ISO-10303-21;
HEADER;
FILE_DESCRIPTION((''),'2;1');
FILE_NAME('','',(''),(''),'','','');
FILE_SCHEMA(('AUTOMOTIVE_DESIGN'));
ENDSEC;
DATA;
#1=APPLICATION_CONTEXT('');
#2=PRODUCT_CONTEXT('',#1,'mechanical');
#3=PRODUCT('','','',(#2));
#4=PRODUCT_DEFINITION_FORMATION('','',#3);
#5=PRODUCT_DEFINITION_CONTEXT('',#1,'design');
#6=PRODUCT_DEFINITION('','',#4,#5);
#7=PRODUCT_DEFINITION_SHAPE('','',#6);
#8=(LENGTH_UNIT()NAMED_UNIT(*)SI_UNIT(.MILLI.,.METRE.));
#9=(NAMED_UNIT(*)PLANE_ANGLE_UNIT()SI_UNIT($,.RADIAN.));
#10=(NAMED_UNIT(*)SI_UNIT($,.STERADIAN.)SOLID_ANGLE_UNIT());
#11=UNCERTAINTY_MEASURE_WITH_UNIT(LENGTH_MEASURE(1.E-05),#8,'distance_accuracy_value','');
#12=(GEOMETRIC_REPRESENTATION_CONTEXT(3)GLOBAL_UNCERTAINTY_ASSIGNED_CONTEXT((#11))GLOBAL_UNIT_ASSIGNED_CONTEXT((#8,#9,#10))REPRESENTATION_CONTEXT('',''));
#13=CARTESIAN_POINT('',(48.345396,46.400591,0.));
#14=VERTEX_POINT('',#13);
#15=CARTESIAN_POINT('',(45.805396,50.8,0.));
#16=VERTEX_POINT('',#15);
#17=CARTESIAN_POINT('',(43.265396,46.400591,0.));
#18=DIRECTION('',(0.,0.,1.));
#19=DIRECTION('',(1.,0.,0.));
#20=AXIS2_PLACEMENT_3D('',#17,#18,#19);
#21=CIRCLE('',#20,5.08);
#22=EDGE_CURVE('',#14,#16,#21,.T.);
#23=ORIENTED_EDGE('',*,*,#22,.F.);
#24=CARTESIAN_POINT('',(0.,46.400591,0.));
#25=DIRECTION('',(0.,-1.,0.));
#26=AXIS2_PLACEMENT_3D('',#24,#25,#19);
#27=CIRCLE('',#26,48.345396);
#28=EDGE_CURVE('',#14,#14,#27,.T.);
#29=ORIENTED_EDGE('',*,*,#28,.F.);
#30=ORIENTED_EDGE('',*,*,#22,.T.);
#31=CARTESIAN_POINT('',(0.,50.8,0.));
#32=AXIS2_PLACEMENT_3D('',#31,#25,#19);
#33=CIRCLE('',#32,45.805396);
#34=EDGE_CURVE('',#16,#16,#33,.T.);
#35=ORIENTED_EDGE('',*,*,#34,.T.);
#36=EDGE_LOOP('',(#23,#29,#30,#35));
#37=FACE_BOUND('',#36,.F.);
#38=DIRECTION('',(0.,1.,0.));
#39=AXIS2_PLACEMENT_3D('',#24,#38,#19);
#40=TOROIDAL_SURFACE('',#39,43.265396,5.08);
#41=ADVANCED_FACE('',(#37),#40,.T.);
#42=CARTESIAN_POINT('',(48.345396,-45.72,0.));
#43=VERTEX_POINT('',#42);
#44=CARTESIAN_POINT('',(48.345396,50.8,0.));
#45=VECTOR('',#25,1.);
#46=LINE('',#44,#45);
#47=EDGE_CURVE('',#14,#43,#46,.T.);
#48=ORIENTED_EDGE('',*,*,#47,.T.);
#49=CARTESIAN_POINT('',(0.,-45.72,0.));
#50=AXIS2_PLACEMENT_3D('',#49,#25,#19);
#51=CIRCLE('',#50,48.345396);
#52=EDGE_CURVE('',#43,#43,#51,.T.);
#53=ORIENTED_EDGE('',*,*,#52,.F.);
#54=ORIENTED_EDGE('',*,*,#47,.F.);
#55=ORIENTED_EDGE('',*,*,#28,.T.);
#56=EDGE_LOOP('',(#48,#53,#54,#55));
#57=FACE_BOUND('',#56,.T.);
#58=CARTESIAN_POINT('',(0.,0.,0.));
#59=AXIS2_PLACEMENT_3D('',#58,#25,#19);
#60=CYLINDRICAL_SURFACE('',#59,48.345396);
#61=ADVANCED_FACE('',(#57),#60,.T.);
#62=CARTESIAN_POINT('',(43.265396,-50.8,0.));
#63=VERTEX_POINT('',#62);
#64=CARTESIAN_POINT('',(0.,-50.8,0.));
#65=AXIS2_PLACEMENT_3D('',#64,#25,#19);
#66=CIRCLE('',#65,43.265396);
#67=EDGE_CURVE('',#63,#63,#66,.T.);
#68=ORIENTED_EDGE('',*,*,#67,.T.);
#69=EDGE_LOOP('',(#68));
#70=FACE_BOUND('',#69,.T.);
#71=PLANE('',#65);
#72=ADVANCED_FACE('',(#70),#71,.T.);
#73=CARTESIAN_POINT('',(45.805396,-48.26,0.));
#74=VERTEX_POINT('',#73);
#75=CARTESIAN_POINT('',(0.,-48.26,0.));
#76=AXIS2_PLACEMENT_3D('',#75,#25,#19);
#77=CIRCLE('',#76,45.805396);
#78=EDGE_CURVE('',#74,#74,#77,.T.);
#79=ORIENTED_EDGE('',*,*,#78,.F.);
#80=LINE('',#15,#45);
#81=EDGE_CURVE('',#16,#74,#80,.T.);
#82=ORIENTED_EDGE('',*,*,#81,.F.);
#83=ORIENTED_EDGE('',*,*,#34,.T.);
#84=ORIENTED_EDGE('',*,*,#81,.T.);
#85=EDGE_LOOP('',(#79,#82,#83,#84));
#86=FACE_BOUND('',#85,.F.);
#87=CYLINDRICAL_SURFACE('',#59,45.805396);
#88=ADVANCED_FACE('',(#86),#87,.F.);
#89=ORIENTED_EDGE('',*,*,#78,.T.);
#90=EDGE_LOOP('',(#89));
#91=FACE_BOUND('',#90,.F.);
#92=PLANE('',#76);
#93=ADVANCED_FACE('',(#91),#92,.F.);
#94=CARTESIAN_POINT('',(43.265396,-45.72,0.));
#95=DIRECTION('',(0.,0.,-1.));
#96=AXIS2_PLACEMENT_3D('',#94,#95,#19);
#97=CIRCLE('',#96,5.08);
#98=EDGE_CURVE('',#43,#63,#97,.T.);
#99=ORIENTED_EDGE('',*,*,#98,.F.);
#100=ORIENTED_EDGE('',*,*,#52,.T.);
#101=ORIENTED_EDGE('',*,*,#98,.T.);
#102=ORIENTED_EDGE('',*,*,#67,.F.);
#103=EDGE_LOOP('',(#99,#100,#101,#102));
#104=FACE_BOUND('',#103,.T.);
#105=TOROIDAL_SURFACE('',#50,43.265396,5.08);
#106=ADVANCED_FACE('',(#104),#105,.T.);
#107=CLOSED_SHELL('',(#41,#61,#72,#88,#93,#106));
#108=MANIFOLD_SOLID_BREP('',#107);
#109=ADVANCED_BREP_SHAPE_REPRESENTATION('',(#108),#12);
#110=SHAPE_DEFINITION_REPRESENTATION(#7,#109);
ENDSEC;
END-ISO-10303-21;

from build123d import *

# Parameters (mm, degrees)
F0_R     = 48.3453961675
F1_DEPTH = 50.8
F2_T     = -2.54


# Not quite as in the source:
# - a fillet or chamfer that OpenCascade refuses, or shapes differently, is made with other operations: its cross-section is extruded or revolved along the edge and cut away or added


with BuildPart() as f1:
    # F0 (on Front) → F1 (new body, symmetric)
    with BuildSketch(Plane.XZ):
        Circle(F0_R)
    extrude(amount=F1_DEPTH, both=True)

    # F2
    f2_openings = [f1.faces().sort_by_distance(p)[0] for p in [
        (0, 50.8, 0),
    ]]
    offset(amount=F2_T, openings=f2_openings)

    # F3: fillet of radius 5.08 on 3 edges, made by hand

    # F3_s1 → F3_t2 (revolve, cut)
    with BuildSketch(Plane.XY):
        with BuildLine():
            ThreePointArc((48.3453961675, 46.4005909488), (47.6648052188, 48.9405909488), (45.8053961675, 50.8))
            Line((45.8053961675, 50.8), (45.8561961675, 50.887988181))
            ThreePointArc((45.8561961675, 50.887988181), (47.0753961675, 50.9016), (48.3453961675, 50.9016))
            Line((48.3453961675, 50.9016), (48.4469961675, 50.8))
            Line((48.4469961675, 50.8), (48.4469961675, 46.4005909488))
            Line((48.4469961675, 46.4005909488), (48.3453961675, 46.4005909488))
        make_face()
    revolve(axis=Axis((0, 50.8, 0), (0, -1, 0)), mode=Mode.SUBTRACT)

    # F3_s3 → F3_t4 (revolve, cut)
    with BuildSketch(Plane.XY):
        with BuildLine():
            ThreePointArc((48.3453961675, -45.72), (46.857498616, -49.3121024484), (43.2653961675, -50.8))
            Line((43.2653961675, -50.8), (43.2653961675, -50.9016))
            Line((43.2653961675, -50.9016), (48.4469961675, -50.9016))
            Line((48.4469961675, -50.9016), (48.4469961675, -45.72))
            Line((48.4469961675, -45.72), (48.3453961675, -45.72))
        make_face()
    revolve(axis=Axis((0, -50.8, 0), (0, -1, 0)), mode=Mode.SUBTRACT)


solid = f1.part
